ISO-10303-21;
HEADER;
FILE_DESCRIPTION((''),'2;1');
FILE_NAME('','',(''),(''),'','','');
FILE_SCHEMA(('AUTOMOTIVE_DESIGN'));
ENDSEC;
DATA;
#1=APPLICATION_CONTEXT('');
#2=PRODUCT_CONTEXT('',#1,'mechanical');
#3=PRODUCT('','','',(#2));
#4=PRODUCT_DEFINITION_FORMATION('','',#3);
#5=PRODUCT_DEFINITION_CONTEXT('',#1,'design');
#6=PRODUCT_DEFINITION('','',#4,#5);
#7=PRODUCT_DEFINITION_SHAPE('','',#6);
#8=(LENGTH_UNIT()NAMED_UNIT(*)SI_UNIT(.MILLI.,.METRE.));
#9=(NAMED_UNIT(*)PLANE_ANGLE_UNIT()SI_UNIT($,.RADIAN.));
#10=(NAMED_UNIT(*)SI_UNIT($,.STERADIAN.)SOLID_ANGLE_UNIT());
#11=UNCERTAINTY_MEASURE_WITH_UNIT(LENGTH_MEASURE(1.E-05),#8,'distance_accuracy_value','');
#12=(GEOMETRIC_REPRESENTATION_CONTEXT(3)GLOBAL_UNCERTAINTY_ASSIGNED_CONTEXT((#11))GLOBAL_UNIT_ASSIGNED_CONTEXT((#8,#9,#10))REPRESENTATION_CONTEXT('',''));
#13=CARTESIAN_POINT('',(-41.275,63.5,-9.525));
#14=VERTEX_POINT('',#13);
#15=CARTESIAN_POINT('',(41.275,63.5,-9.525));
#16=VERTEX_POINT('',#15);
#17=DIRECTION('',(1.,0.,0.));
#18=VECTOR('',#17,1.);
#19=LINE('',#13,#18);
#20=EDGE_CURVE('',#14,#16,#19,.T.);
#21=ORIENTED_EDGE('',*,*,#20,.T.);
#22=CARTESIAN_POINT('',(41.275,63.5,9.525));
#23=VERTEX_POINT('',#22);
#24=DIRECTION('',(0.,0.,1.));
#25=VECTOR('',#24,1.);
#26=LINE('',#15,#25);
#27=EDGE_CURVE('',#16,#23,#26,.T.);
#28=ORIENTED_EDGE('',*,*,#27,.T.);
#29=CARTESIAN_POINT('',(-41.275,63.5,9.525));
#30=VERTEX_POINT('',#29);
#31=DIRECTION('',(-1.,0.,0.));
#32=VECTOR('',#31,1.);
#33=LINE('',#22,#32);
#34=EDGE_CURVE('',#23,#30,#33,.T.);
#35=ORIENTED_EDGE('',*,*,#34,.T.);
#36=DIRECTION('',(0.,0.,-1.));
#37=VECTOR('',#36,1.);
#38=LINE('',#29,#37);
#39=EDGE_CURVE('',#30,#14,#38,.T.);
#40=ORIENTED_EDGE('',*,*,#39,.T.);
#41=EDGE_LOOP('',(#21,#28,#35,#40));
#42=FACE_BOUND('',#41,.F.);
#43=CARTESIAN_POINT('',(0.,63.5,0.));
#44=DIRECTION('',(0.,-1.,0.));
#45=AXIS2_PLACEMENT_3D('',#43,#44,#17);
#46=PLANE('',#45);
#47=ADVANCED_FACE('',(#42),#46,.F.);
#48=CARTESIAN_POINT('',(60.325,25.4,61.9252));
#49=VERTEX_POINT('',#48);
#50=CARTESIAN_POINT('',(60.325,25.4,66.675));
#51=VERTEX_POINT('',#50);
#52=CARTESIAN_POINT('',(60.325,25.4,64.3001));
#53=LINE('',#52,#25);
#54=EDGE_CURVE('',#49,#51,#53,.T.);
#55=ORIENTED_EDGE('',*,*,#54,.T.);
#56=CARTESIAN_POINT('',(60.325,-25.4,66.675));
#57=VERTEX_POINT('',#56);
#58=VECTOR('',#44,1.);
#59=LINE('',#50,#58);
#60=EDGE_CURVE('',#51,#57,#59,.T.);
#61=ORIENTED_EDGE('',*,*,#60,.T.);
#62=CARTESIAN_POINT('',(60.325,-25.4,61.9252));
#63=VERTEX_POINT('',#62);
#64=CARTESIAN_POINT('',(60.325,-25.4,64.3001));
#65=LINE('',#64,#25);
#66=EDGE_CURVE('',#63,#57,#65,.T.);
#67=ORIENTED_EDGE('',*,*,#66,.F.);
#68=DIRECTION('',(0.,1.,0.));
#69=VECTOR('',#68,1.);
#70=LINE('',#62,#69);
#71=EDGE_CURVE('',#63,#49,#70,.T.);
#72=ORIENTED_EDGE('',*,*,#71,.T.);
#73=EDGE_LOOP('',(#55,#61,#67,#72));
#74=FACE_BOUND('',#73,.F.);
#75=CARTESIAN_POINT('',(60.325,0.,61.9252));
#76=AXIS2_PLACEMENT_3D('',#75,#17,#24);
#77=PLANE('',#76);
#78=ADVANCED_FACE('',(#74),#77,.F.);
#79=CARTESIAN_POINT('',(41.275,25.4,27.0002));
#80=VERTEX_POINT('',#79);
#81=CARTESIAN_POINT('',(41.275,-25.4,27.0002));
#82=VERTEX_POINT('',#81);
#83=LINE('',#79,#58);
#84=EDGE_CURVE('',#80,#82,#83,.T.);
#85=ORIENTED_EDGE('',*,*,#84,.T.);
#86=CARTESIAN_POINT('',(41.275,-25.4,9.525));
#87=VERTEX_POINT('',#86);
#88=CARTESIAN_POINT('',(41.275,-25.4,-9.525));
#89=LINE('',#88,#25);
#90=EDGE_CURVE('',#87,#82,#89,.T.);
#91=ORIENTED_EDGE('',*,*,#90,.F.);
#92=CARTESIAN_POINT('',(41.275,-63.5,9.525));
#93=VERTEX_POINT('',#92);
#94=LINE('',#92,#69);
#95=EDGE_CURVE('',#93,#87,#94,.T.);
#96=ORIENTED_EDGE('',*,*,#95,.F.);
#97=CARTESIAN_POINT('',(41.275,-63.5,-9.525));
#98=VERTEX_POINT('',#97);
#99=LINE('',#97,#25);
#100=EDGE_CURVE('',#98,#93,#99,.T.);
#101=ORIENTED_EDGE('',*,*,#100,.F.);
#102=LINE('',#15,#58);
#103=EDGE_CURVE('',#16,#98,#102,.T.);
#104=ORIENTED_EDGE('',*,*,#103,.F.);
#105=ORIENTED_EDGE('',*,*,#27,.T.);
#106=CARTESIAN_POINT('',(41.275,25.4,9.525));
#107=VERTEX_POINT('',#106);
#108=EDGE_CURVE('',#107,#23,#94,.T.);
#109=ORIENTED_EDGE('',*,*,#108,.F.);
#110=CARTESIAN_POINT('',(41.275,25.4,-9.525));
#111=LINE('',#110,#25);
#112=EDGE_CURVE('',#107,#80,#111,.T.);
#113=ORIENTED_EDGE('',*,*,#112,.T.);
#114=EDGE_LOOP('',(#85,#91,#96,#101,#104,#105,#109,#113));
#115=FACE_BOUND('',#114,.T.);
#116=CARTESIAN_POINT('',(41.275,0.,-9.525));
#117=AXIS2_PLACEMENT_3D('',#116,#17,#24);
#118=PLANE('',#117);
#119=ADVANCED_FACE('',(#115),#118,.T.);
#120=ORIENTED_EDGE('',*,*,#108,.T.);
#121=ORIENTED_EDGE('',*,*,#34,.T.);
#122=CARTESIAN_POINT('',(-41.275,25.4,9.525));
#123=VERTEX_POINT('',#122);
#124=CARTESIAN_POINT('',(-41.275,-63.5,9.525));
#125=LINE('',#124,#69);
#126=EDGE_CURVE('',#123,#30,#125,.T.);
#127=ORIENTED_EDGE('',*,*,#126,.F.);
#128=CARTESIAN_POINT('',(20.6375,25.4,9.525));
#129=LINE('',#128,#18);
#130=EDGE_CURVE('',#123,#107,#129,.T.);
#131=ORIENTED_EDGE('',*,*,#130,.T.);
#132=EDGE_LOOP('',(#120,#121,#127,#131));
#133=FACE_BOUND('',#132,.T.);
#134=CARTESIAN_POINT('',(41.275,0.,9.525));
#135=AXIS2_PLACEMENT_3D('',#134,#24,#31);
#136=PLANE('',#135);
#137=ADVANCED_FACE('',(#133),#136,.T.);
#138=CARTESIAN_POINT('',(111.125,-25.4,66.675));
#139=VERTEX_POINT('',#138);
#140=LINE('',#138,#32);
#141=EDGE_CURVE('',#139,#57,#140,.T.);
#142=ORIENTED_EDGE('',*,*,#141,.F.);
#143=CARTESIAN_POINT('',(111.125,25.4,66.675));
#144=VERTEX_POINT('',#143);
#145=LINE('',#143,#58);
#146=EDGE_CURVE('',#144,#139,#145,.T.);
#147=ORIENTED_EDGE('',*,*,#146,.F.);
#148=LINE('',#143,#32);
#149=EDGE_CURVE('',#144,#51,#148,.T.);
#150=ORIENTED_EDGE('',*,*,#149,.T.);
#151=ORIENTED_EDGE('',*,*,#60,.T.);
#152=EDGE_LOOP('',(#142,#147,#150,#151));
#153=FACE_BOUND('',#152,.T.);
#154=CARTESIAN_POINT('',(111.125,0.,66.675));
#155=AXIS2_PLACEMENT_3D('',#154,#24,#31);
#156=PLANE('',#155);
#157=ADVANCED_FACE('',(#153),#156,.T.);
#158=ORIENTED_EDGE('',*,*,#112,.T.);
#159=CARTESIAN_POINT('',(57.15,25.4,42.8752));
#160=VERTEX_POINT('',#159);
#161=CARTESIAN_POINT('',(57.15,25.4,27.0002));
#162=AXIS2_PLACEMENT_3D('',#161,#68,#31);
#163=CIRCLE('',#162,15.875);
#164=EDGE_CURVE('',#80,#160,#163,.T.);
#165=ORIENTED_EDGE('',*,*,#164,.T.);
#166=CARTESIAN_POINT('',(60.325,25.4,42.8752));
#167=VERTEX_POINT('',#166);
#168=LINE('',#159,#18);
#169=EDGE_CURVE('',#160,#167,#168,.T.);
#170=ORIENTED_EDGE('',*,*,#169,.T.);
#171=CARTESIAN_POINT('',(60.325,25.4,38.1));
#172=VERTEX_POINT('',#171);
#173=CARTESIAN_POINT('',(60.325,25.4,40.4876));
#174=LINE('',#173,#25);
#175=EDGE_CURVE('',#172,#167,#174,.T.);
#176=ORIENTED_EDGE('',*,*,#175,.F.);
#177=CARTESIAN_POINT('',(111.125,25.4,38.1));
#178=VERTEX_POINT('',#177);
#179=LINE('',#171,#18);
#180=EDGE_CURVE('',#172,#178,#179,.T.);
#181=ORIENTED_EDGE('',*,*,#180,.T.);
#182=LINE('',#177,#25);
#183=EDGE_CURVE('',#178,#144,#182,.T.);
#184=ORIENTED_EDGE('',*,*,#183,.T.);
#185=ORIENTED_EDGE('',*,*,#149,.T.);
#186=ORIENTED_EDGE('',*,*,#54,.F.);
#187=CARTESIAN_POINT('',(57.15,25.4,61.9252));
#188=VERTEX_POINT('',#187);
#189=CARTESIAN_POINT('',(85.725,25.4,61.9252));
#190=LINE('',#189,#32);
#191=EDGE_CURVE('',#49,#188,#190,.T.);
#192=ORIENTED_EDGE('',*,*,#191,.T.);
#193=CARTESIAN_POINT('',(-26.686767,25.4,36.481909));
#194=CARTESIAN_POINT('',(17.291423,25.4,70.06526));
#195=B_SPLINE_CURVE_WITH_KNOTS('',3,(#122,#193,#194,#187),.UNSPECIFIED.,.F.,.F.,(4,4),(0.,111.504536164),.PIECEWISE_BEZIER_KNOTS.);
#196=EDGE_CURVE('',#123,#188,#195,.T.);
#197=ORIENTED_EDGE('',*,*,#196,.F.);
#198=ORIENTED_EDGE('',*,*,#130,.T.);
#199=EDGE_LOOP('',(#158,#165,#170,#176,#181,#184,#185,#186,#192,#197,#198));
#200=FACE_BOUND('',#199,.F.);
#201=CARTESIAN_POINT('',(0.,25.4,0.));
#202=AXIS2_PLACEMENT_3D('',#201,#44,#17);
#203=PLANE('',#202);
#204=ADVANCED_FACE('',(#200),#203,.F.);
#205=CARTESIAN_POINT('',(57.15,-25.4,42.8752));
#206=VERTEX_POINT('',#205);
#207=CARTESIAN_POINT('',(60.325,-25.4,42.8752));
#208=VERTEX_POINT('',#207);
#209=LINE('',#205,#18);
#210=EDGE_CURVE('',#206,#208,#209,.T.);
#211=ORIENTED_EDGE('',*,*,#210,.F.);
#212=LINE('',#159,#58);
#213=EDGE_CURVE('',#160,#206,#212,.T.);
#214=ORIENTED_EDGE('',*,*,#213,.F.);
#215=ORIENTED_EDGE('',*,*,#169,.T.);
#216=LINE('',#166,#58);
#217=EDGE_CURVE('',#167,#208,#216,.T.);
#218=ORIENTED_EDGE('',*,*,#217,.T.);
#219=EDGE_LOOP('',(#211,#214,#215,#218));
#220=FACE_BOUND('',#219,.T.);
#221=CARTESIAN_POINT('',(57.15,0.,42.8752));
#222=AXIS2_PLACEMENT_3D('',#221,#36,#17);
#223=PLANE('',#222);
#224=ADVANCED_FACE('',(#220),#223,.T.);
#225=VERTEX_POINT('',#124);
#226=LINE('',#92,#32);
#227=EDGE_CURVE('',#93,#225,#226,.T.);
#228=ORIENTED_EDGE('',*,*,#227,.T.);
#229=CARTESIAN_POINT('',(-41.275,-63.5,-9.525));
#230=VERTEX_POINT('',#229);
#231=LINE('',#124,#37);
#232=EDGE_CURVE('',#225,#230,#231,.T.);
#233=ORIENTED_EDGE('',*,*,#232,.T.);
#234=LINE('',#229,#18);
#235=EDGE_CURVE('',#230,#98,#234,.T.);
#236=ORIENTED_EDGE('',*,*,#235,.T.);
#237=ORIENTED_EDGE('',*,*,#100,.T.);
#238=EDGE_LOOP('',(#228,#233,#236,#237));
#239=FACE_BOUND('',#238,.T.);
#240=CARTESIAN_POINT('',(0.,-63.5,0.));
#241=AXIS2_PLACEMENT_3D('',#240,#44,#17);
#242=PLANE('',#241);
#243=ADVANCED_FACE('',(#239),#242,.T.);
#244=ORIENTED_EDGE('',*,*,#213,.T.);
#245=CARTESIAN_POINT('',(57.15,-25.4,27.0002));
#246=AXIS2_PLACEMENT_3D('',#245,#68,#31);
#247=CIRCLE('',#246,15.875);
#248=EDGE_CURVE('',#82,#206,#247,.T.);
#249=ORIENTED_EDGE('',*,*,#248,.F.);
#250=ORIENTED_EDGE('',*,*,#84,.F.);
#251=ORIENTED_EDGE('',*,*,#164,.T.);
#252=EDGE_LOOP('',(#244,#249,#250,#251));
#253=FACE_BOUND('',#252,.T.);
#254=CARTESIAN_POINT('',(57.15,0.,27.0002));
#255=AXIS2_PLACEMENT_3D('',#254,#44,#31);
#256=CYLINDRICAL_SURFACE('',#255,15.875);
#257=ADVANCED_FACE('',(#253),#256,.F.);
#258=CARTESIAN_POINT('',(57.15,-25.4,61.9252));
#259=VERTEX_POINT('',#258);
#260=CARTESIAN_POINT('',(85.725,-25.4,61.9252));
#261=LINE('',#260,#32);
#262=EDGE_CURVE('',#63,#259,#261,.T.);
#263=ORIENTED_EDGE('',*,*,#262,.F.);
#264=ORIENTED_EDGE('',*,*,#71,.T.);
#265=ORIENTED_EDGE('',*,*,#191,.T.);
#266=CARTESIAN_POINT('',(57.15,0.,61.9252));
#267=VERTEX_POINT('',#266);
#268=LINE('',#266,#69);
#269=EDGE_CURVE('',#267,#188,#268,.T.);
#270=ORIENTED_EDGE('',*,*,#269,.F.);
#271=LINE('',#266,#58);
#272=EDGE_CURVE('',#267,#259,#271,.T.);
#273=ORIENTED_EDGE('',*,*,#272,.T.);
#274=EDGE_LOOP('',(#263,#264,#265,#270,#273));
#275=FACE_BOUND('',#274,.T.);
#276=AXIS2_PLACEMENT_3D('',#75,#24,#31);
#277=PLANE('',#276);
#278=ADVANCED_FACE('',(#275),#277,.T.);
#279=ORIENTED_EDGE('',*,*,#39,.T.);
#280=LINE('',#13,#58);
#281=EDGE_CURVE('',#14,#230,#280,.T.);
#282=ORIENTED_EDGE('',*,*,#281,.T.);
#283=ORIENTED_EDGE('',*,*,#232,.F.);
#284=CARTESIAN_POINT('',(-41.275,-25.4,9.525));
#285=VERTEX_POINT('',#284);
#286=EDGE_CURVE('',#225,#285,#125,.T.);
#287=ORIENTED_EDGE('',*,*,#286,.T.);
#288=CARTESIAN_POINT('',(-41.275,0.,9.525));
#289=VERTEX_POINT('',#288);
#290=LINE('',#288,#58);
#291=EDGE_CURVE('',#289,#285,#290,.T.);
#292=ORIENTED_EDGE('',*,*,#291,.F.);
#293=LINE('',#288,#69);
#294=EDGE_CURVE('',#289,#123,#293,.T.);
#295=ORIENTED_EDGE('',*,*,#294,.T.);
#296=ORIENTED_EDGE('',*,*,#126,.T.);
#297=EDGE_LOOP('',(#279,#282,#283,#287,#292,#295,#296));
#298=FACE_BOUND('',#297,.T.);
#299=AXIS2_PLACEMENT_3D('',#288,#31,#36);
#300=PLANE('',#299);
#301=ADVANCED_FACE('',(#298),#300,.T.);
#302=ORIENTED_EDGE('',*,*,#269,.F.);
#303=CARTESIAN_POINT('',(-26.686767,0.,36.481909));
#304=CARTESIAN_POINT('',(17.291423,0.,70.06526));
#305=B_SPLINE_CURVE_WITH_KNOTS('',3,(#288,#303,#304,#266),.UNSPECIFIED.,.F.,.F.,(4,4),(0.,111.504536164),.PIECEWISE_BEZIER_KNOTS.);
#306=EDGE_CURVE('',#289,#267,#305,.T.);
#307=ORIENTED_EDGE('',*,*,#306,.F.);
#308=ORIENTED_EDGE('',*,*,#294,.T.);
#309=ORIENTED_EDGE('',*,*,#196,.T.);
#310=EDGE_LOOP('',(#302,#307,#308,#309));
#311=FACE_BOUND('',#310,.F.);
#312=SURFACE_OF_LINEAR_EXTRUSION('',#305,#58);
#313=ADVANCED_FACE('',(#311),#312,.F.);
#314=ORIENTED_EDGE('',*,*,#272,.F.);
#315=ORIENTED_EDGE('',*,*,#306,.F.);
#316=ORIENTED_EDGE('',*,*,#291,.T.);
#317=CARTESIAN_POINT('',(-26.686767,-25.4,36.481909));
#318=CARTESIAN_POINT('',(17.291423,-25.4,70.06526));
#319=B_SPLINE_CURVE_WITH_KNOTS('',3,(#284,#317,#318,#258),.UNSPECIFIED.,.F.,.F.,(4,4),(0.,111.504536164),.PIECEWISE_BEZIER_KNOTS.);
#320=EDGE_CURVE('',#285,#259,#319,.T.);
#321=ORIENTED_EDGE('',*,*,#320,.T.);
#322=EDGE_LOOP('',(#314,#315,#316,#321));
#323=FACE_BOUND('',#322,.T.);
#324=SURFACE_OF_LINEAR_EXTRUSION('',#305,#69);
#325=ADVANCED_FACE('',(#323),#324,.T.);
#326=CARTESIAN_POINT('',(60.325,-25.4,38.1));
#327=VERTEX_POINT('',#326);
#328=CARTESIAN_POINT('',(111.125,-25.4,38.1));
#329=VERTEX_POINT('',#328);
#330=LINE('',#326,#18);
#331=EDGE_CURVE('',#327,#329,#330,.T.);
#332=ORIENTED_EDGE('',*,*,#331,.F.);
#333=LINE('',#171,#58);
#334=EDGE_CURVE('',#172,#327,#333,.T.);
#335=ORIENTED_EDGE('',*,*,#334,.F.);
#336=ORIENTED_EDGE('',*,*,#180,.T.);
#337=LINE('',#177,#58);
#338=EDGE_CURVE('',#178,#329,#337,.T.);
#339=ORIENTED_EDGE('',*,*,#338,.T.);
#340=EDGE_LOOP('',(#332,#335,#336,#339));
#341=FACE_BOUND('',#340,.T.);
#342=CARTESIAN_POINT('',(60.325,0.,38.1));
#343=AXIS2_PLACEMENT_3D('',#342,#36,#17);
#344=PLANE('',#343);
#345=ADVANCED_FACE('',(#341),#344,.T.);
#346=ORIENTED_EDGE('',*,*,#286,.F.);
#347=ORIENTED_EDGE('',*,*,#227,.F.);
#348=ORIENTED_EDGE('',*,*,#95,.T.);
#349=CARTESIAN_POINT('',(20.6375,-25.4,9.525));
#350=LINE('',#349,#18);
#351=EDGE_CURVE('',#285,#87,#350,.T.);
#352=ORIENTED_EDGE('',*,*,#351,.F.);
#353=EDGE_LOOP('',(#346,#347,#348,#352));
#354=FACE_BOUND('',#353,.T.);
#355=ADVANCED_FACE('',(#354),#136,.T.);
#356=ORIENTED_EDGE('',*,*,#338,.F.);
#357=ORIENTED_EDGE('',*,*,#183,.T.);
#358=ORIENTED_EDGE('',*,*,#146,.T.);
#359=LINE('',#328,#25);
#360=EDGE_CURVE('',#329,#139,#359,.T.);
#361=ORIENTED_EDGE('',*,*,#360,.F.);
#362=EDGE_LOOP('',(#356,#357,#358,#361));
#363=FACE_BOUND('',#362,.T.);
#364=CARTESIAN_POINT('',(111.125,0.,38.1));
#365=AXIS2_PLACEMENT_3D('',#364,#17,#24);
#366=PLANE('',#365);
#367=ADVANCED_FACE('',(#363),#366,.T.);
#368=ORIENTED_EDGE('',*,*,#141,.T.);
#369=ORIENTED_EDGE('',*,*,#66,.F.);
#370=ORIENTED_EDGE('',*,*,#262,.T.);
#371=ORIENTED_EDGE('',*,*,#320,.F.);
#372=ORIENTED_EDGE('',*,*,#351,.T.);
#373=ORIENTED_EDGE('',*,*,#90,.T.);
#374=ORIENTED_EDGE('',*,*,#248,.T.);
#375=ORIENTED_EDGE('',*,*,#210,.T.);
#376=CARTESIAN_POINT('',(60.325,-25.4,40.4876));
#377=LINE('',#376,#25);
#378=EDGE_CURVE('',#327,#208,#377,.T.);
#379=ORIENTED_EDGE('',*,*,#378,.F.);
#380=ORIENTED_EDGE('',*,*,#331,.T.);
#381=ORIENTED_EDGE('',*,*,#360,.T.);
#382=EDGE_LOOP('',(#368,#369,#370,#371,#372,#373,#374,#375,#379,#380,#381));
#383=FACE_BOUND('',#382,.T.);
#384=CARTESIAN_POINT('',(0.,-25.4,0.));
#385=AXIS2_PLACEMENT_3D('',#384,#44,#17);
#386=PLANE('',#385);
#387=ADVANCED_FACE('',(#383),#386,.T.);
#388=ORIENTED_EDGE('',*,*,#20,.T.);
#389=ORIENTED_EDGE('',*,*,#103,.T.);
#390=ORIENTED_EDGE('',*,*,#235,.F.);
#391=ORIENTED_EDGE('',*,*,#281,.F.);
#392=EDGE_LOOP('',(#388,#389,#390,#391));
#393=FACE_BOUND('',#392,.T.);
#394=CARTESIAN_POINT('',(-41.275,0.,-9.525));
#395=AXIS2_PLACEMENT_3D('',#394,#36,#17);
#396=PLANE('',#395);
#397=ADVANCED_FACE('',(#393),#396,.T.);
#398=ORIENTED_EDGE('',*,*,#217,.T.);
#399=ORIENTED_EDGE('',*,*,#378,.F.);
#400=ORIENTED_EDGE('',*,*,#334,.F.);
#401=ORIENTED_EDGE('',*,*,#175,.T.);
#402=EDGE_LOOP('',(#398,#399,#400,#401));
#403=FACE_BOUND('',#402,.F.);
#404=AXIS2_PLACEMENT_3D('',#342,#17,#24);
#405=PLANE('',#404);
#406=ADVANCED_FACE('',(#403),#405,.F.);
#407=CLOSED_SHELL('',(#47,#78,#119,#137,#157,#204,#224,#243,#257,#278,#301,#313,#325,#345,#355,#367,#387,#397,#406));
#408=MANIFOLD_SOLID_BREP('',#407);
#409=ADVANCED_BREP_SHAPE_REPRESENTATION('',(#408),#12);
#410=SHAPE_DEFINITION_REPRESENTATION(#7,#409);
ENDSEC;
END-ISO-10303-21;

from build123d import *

# Parameters (mm, degrees)
F1_DEPTH = 63.5
F0_W     = 25.4
F0_H     = 19.05
F0_H_2   = 4.7498
F0_H_3   = 4.7752
F2_DEPTH = 25.4


with BuildPart() as f1:
    # F0 (on Front) → F1 (new body, symmetric)
    with BuildSketch(Plane.XZ):
        Polygon((-41.275, 9.525), (-41.275, -9.525), (41.275, -9.525), (41.275, 9.525), (22.225, 9.525), align=None)
    extrude(amount=F1_DEPTH, both=True)

    # F0 (on Front) → F2 (join, symmetric)
    with BuildSketch(Plane.XZ):
        Polygon((-41.275, 9.525), (-41.275, -9.525), (41.275, -9.525), (41.275, 9.525), (22.225, 9.525), align=None)
        with BuildLine():
            add(Edge.make_bspline(
                [(-41.275, 9.525), (-26.6867671162, 36.4819094539), (17.2914229333, 70.0652599335), (57.15, 61.9252)],
                knots=[0, 0, 0, 0, 111.5045361635, 111.5045361635, 111.5045361635, 111.5045361635], degree=3))
            Line((-41.275, 9.525), (22.225, 9.525))
            Line((22.225, 9.525), (22.225, 27.0002))
            ThreePointArc((22.225, 27.0002), (32.4542956671, 51.6959043329), (57.15, 61.9252))
        make_face()
        with BuildLine():
            Line((22.225, 9.525), (41.275, 9.525))
            Line((41.275, 9.525), (41.275, 27.0002))
            ThreePointArc((41.275, 27.0002), (45.9246798487, 38.2255201513), (57.15, 42.8752))
            Line((57.15, 42.8752), (60.325, 42.8752))
            Line((60.325, 42.8752), (60.325, 61.9252))
            Line((60.325, 61.9252), (57.15, 61.9252))
            ThreePointArc((57.15, 61.9252), (32.4542956671, 51.6959043329), (22.225, 27.0002))
            Line((22.225, 27.0002), (22.225, 9.525))
        make_face()
        with Locations((73.025, 52.4002)):
            Rectangle(F0_W, F0_H)
        with Locations((73.025, 64.3001)):
            Rectangle(F0_W, F0_H_2)
        with Locations((73.025, 40.4876)):
            Rectangle(F0_W, F0_H_3)
        Polygon((85.725, 66.675), (85.725, 61.9252), (85.725, 42.8752), (85.725, 38.1), (111.125, 38.1), (111.125, 66.675), align=None)
    extrude(amount=F2_DEPTH, both=True)


solid = f1.part
